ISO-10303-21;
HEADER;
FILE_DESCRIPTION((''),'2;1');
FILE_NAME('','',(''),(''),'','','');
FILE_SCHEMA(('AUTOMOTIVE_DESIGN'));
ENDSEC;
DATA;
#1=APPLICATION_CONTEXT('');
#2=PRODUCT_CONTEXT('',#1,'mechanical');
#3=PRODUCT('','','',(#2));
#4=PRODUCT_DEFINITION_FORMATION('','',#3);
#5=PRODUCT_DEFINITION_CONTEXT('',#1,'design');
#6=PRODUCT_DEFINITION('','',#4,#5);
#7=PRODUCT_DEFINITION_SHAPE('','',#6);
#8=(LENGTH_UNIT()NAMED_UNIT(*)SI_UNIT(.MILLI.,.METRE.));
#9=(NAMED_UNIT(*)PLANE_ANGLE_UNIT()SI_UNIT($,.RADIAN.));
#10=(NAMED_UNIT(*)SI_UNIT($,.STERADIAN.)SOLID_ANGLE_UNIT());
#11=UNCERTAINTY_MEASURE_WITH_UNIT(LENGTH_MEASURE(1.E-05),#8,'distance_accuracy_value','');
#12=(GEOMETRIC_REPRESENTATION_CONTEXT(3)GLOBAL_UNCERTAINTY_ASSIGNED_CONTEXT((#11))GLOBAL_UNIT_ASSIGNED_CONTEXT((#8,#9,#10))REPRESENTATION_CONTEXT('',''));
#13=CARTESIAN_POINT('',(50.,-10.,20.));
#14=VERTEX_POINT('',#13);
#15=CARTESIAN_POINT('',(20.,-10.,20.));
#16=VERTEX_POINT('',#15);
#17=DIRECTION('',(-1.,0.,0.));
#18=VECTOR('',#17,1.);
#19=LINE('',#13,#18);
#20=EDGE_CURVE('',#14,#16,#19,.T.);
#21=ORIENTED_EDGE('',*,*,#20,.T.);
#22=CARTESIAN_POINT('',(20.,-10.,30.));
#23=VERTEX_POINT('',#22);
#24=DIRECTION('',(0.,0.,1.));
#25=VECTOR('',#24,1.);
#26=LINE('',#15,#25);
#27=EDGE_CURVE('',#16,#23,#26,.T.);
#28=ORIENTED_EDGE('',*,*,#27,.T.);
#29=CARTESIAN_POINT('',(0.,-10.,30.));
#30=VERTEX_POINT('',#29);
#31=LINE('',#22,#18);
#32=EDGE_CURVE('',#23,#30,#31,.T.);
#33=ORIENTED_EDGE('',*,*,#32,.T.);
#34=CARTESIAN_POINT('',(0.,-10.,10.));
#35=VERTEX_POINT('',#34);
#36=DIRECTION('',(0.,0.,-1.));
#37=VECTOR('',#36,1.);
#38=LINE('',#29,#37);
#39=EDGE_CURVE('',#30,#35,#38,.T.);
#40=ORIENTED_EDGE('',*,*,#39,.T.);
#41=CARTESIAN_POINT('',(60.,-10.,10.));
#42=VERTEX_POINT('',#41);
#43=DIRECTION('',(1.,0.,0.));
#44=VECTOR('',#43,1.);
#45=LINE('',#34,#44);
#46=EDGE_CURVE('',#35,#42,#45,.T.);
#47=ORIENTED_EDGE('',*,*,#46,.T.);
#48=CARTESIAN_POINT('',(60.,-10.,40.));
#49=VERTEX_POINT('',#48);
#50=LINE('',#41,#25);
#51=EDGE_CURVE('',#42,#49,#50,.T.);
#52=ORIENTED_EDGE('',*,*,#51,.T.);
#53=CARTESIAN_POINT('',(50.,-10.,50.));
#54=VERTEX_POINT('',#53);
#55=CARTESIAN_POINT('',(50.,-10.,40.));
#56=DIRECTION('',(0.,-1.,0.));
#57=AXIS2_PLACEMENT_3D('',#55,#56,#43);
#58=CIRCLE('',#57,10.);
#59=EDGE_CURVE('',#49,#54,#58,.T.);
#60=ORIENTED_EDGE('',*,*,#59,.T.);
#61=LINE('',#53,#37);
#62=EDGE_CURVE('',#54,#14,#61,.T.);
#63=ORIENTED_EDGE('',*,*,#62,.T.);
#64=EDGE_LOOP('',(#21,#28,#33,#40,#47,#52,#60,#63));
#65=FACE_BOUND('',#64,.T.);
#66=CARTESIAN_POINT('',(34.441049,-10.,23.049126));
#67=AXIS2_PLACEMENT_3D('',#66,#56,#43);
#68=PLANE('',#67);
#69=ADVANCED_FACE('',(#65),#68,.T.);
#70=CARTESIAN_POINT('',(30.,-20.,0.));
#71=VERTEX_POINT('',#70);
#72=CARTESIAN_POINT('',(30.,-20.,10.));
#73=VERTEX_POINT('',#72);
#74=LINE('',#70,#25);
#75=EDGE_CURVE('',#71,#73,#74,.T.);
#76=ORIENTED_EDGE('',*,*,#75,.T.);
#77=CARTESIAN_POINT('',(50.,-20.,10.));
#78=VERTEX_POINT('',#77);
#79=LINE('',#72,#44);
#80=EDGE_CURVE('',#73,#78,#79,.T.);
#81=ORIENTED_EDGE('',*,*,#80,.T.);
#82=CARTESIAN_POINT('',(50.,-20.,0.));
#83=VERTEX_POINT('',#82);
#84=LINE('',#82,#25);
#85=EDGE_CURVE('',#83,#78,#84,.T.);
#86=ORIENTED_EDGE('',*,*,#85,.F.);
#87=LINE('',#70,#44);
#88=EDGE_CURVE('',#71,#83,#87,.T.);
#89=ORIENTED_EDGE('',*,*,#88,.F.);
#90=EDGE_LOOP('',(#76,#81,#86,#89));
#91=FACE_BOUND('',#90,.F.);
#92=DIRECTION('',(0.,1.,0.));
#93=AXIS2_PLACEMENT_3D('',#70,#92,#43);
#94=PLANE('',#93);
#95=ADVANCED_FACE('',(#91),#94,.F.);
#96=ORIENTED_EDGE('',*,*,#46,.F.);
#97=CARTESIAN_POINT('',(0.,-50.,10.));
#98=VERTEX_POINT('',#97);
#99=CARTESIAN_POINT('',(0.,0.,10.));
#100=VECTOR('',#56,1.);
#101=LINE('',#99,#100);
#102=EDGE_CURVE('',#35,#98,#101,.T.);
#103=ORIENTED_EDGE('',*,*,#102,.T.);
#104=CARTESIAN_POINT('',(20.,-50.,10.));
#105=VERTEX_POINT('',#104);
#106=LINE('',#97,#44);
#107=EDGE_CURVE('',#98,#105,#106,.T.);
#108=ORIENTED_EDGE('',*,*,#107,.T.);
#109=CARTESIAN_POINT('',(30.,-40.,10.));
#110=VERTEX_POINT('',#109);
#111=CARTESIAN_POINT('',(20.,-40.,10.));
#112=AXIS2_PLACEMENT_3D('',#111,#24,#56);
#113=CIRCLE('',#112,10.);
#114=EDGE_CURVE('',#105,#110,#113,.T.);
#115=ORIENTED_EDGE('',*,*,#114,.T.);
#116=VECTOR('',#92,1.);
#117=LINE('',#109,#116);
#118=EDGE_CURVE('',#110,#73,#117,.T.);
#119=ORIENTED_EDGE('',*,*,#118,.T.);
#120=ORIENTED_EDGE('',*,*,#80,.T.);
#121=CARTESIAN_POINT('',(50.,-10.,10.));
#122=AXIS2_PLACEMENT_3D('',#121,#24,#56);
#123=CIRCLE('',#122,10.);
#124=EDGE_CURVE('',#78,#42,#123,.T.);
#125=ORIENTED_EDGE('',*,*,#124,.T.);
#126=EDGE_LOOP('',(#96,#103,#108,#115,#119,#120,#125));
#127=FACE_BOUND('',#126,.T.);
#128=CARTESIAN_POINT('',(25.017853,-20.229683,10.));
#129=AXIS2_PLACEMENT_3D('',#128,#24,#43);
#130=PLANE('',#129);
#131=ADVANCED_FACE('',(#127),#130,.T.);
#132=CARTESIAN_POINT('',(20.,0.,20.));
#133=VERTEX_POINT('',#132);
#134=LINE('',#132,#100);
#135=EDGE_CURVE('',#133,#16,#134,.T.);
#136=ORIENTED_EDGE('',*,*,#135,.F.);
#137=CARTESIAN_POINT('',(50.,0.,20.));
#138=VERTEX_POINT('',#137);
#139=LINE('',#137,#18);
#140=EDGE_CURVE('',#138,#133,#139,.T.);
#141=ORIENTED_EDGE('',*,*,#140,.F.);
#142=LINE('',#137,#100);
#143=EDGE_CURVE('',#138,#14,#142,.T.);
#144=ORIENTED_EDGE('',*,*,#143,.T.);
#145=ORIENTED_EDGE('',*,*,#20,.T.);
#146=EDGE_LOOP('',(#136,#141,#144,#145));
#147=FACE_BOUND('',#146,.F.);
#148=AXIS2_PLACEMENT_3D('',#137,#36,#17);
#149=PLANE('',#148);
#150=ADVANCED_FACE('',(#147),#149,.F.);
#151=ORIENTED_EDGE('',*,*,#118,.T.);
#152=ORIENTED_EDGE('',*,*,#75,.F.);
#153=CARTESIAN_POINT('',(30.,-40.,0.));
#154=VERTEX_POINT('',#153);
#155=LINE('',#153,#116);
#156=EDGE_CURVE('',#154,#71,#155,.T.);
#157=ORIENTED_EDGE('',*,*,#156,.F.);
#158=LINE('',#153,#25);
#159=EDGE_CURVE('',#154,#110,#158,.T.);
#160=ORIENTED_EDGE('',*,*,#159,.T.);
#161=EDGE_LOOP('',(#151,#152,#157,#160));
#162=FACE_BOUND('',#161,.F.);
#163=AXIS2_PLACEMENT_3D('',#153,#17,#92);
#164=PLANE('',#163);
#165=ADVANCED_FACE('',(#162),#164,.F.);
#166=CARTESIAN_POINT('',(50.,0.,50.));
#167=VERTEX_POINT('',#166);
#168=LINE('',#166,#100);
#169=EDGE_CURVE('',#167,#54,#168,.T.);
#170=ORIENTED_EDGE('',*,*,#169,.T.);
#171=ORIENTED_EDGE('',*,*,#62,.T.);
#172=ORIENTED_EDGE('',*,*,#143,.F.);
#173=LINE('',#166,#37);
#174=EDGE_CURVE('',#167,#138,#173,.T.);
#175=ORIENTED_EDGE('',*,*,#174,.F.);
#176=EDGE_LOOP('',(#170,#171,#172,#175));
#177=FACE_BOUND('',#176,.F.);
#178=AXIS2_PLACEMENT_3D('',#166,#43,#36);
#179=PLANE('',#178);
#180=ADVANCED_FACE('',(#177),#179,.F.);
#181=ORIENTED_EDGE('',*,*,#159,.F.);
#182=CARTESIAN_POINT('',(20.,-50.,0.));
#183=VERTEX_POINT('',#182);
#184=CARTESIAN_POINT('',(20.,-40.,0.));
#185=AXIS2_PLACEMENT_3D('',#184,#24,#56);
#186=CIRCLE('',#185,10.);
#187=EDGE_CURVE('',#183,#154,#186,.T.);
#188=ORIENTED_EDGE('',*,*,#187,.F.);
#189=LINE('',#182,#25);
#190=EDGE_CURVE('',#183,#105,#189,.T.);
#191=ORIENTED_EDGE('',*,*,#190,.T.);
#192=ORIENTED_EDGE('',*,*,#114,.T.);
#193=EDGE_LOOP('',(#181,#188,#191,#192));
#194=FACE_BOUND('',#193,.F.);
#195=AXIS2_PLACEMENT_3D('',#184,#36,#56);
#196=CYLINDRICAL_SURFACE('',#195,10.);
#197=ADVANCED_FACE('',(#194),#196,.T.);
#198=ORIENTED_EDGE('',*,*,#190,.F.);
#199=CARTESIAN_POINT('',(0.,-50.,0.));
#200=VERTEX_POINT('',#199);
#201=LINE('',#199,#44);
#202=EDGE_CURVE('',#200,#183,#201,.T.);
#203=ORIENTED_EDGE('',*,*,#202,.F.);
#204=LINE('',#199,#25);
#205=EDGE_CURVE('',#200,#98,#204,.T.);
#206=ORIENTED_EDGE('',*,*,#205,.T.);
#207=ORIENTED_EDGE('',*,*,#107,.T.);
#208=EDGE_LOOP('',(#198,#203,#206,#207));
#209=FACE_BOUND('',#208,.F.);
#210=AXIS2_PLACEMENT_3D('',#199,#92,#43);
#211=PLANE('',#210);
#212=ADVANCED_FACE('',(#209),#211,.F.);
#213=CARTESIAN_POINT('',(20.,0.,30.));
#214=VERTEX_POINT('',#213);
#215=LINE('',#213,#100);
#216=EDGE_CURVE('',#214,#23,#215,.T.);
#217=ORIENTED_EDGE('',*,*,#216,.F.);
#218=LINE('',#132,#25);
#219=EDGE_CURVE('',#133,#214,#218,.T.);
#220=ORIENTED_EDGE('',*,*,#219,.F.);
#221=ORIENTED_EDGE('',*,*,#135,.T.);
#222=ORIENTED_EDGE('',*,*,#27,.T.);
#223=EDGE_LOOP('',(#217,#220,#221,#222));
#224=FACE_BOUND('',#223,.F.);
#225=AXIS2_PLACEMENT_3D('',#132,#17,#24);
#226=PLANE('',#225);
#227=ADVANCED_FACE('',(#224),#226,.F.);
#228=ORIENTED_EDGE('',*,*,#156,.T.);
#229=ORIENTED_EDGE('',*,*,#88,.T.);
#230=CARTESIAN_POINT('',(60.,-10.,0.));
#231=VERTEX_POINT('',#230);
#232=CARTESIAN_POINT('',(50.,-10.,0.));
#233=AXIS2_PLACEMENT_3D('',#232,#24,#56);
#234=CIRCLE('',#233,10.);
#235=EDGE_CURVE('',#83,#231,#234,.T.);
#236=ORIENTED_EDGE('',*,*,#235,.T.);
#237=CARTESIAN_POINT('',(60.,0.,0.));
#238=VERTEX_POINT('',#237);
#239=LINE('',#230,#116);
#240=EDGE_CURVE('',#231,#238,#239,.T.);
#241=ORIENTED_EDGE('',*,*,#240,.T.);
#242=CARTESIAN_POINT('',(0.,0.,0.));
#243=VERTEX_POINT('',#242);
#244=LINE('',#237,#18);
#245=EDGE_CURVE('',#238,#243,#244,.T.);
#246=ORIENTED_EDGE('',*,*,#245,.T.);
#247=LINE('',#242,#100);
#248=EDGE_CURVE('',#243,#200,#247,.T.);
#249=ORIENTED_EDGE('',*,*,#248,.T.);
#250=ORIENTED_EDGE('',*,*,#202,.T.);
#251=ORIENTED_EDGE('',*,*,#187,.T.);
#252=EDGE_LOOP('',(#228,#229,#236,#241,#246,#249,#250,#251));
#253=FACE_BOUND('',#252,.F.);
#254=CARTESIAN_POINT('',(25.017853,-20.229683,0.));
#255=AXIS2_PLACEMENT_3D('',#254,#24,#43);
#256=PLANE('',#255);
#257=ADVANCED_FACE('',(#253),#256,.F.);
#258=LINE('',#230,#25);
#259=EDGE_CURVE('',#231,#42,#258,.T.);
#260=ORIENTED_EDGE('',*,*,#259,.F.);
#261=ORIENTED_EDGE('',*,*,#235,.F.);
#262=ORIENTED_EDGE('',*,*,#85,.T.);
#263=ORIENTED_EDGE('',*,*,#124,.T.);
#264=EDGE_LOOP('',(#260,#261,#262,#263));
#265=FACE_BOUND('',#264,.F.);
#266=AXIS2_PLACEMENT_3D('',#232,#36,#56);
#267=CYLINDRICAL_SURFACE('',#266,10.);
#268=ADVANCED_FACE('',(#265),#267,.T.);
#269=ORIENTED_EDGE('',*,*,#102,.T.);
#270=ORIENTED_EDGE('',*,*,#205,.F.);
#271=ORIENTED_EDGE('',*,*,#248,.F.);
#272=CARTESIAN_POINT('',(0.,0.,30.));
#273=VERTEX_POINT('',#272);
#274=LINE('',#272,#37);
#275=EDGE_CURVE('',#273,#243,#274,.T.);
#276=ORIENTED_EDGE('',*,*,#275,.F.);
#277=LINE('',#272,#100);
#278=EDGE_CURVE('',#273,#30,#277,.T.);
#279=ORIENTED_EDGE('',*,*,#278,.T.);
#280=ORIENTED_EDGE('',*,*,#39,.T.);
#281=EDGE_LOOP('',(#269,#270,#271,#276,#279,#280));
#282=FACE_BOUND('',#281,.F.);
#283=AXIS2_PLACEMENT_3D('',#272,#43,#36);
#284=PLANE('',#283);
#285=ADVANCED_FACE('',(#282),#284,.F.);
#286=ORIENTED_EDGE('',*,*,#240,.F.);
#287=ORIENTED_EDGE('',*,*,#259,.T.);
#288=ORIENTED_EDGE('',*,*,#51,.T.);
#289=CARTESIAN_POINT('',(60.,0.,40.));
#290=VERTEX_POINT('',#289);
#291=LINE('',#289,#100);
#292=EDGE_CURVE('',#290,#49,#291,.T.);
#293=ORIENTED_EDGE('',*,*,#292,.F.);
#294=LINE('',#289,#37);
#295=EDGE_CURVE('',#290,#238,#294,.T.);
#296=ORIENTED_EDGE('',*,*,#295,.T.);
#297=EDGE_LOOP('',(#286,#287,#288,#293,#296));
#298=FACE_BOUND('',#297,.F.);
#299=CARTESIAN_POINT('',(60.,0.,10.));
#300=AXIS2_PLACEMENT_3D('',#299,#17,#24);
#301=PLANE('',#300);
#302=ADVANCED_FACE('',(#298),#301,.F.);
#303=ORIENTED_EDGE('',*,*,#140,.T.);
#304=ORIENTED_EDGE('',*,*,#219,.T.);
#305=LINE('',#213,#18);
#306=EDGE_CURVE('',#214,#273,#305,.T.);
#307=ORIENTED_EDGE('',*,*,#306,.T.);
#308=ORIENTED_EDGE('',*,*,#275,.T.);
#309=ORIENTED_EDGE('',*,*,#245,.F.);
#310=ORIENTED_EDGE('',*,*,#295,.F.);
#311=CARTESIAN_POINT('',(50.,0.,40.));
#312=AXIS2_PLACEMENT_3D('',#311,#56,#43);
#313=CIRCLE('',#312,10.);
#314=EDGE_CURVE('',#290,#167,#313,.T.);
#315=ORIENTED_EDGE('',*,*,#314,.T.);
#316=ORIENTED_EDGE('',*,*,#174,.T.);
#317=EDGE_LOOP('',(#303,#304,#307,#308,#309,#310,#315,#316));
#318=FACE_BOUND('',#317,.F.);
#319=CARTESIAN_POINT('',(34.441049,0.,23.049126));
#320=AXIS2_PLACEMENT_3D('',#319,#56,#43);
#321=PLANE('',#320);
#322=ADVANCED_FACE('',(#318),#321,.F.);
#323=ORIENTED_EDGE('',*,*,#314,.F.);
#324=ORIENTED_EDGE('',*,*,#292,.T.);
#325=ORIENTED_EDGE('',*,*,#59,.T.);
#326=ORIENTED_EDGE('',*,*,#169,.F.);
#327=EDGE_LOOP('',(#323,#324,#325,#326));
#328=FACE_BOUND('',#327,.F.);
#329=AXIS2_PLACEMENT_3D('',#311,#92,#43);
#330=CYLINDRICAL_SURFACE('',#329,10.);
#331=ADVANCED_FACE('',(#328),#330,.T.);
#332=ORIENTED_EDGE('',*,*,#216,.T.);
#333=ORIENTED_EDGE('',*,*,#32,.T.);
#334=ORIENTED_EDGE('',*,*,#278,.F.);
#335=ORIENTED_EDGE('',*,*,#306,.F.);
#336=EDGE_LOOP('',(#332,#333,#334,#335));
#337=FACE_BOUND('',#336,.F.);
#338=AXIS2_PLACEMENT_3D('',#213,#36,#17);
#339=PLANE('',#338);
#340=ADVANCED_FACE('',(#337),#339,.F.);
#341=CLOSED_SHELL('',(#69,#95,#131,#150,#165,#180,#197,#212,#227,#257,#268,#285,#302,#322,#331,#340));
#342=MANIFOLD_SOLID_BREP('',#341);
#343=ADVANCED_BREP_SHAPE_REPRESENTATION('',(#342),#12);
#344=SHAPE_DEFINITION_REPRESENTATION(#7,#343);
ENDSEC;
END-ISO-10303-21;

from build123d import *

# Parameters (mm, degrees)
F1_DEPTH = 10
F3_DEPTH = 10


# Not quite as in the source:
# - a feature names something its author has since deleted; it is built from what else it names


with BuildPart() as f1:
    # F0 (on Top) → F1 (new body)
    with BuildSketch(Plane.XY):
        with BuildLine():
            Line((60, 0), (20, 0))
            Line((20, 0), (0, 0))
            Line((0, 0), (0, -50))
            Line((0, -50), (20, -50))
            ThreePointArc((20, -50), (27.0710678119, -47.0710678119), (30, -40))
            Line((30, -40), (30, -20))
            Line((30, -20), (50, -20))
            ThreePointArc((50, -20), (57.0710678119, -17.0710678119), (60, -10))
            Line((60, -10), (60, 0))
        make_face()
    extrude(amount=F1_DEPTH)

    # F2 (on Front) → F3 (join)
    with BuildSketch(Plane.XZ):
        with BuildLine():
            Line((0, 30), (0, 10))
            Line((0, 10), (60, 10))
            Line((60, 10), (60, 40))
            ThreePointArc((60, 40), (57.0710678119, 47.0710678119), (50, 50))
            Line((50, 50), (50, 20))
            Line((50, 20), (20, 20))
            Line((20, 20), (20, 30))
            Line((20, 30), (0, 30))
        make_face()
    extrude(amount=F3_DEPTH)


solid = f1.part
